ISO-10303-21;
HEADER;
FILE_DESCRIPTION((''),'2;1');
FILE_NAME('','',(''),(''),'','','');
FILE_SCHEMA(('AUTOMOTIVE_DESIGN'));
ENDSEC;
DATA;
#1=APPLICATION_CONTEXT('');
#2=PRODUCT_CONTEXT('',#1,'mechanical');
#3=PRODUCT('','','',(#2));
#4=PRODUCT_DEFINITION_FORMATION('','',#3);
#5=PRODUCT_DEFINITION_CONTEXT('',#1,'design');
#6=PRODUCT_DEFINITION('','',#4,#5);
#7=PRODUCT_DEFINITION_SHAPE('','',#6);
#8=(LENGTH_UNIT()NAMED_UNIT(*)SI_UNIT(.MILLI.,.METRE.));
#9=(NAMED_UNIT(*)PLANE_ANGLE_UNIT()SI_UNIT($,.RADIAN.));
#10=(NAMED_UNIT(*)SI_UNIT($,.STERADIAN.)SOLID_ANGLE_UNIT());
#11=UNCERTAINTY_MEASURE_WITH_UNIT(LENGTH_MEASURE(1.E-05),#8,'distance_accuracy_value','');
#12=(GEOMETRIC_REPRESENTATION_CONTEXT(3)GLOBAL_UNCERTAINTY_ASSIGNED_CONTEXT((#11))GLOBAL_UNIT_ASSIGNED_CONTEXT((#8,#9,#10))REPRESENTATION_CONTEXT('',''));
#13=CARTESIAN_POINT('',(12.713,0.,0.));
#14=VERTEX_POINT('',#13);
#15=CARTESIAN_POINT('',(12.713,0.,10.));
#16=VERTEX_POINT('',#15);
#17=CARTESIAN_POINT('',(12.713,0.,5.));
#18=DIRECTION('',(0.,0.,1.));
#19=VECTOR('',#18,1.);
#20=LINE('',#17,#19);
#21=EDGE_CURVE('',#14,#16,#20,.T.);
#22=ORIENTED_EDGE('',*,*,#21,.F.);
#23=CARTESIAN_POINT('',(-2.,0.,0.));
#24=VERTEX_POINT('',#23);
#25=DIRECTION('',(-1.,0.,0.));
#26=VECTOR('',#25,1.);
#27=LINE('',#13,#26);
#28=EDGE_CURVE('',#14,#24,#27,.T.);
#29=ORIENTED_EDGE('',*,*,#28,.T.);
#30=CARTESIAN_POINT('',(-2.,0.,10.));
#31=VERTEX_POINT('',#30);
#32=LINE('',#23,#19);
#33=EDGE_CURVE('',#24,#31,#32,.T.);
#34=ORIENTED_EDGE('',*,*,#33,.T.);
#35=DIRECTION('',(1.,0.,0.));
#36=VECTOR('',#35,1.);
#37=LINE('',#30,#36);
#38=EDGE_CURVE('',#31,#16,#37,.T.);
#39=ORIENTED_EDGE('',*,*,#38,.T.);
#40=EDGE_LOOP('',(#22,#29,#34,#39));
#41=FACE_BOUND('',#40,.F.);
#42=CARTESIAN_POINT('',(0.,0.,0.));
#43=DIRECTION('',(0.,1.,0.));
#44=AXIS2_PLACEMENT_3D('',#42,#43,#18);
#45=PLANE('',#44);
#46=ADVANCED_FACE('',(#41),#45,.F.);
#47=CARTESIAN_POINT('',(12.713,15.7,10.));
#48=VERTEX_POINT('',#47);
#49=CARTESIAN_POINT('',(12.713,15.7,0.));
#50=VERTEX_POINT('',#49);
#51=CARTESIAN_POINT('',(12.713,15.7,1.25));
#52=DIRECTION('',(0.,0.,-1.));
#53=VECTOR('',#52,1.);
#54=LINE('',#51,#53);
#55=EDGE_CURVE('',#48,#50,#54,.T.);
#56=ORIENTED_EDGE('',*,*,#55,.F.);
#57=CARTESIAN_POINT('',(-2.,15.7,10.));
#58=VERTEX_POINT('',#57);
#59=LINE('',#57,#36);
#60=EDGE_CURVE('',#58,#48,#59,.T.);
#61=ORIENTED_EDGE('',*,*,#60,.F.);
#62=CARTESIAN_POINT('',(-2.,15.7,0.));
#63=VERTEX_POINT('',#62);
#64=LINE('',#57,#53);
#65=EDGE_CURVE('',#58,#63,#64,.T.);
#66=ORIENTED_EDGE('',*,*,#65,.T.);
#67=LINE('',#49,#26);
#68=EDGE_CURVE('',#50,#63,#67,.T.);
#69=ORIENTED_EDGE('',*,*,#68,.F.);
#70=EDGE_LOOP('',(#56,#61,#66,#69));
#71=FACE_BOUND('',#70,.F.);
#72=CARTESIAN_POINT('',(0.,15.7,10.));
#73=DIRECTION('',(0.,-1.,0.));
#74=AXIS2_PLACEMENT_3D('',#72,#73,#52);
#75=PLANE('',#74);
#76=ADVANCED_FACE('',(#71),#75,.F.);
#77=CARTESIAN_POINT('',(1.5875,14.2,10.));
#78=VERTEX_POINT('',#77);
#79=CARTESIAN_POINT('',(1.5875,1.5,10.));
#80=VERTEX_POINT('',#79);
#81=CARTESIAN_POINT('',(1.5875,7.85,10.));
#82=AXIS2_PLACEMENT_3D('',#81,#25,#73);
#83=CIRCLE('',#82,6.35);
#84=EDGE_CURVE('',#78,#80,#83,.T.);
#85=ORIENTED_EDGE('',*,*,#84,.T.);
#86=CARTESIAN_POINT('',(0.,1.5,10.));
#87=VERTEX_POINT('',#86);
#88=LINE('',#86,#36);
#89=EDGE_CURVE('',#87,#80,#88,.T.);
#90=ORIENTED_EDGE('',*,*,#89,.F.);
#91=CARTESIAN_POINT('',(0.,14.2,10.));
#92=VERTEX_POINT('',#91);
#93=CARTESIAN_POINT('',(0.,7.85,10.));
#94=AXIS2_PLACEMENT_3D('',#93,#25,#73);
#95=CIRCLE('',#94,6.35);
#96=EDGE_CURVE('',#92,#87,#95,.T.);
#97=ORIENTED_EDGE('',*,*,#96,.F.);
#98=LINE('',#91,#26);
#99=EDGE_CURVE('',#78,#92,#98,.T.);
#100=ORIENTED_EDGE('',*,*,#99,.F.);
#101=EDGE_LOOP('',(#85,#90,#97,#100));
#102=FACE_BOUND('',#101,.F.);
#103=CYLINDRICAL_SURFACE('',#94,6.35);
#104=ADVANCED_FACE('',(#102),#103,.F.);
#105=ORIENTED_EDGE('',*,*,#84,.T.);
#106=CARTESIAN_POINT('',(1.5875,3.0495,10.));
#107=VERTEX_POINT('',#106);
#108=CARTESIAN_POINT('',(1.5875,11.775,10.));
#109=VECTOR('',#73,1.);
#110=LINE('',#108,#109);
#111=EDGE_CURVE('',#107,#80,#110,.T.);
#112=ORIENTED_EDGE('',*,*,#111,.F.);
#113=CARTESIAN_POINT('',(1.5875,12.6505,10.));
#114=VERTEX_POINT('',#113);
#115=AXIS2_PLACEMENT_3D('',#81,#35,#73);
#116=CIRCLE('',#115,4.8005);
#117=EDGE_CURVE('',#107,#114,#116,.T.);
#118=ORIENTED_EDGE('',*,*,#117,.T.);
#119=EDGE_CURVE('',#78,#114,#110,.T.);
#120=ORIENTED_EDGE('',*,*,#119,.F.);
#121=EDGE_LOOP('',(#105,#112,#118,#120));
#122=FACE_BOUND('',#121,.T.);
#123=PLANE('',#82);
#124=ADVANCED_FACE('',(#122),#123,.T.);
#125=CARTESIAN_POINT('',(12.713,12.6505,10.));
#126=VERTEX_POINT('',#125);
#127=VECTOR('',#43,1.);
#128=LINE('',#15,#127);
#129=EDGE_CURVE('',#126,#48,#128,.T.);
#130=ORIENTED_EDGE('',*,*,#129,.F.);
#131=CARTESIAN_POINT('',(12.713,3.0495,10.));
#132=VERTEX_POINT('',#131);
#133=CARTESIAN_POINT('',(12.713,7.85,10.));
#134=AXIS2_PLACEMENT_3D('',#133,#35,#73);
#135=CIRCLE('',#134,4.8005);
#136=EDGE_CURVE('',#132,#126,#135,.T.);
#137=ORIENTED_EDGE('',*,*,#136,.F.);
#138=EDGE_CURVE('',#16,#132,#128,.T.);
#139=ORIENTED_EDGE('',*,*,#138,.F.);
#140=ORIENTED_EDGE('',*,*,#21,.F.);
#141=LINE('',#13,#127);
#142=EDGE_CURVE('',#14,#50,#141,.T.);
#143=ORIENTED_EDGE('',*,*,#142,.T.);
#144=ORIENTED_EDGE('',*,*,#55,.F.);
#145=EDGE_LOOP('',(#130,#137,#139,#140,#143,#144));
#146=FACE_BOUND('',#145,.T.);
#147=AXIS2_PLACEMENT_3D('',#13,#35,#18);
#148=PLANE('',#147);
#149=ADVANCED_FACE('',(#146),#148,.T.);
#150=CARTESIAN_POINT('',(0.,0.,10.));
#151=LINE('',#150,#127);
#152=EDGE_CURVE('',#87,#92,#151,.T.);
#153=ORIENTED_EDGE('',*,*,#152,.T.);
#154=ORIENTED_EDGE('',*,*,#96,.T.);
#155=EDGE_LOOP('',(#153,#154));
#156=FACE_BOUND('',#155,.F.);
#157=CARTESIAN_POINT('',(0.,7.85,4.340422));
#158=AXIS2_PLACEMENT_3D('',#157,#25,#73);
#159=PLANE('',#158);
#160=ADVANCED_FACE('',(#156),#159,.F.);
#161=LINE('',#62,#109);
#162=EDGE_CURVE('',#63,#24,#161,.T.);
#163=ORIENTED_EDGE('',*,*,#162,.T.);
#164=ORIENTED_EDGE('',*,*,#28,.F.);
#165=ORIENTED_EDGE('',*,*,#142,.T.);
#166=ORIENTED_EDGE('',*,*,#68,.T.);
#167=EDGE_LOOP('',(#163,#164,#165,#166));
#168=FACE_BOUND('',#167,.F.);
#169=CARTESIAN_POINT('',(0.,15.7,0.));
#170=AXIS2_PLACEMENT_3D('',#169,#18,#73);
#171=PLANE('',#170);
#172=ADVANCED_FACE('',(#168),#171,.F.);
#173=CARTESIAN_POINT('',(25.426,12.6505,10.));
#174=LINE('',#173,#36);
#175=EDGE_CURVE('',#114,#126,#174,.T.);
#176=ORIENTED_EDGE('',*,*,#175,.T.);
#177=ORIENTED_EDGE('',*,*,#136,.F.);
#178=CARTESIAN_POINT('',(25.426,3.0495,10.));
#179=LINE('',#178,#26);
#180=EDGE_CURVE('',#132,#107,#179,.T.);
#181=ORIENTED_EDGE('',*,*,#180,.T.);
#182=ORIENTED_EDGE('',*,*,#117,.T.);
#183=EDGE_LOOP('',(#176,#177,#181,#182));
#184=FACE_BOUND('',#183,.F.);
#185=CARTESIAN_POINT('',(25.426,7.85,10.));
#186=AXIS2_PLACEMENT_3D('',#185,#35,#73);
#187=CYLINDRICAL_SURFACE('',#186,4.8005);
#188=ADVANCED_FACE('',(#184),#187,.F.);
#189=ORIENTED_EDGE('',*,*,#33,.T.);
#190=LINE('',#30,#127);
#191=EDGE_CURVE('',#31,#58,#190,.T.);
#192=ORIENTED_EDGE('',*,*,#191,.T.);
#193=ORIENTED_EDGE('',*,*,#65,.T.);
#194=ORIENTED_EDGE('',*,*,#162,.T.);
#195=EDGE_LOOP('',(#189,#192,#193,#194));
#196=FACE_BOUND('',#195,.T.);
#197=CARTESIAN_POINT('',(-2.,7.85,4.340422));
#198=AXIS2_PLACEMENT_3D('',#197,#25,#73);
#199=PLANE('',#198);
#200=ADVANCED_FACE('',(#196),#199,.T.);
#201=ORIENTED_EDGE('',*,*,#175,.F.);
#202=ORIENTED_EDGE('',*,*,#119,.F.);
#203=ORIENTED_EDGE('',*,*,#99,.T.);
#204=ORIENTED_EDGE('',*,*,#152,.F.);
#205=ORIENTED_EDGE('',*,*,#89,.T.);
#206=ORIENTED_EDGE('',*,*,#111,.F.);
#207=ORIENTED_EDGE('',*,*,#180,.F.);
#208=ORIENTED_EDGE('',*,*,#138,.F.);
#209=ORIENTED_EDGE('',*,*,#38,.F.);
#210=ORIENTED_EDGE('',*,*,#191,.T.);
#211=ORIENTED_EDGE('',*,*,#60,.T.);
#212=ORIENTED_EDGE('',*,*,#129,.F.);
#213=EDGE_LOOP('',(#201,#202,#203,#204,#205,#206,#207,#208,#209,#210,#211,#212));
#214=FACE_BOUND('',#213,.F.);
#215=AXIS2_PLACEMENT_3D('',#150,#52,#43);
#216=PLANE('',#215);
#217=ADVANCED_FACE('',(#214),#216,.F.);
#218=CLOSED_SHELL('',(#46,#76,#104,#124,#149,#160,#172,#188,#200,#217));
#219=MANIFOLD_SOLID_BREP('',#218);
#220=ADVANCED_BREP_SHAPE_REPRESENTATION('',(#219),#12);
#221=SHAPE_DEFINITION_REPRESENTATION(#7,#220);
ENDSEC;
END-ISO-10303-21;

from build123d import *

# Parameters (mm, degrees)
F1_DEPTH  = 145
F2_W      = 15.7
F2_H      = 15
F3_DEPTH  = 11.463
F4_W      = 15.7
F4_H      = 15
F5_DEPTH  = 11.463
F7_DEPTH  = 25.427
F8_R      = 6.35
F8_R_2    = 4.8005
F9_DEPTH  = 1.5875
F10_R     = 6.35
F11_DEPTH = 1.5875
F12_W     = 129.3
F12_H     = 2.5
F12_H_2   = 15
F13_DEPTH = 25.427
F15_DEPTH = 25.427
F16_W     = 12.713
F16_H     = 10
F17_DEPTH = 15.701
F19_DEPTH = 2


with BuildPart() as f1:
    # F0 (on Front) → F1 (new body)
    with BuildSketch(Plane.XZ):
        Polygon((0, 2.5), (0, 0), (12.713, 0), (25.426, 0), (25.426, 2.5), (13.963, 2.5), (13.963, 17.5), (25.426, 17.5), (25.426, 20), (12.713, 20), (0, 20), (0, 17.5), (11.463, 17.5), (11.463, 2.5), align=None)
    extrude(amount=-F1_DEPTH)

    # F2 (on face) → F3 (join, through all)
    with BuildSketch(Plane.YZ.offset(13.963)):
        with Locations((7.85, 10)):
            Rectangle(F2_W, F2_H)
    extrude(amount=F3_DEPTH)

    # F4 (on face) → F5 (join, through all)
    with BuildSketch(Plane(origin=(11.463, 0, 0), x_dir=(0, -1, 0), z_dir=(-1, 0, 0))):
        with Locations((-7.85, 10)):
            Rectangle(F4_W, F4_H)
    extrude(amount=F5_DEPTH)

    # F6 (on face) → F7 (cut, through all)
    with BuildSketch(Plane.YZ.offset(25.426)):
        with BuildLine():
            Line((3.0495, 10), (12.6505, 10))
            ThreePointArc((12.6505, 10), (7.85, 14.8005), (3.0495, 10))
        make_face()
        with BuildLine():
            ThreePointArc((3.0495, 10), (7.85, 5.1995), (12.6505, 10))
            Line((12.6505, 10), (3.0495, 10))
        make_face()
    extrude(amount=-F7_DEPTH, mode=Mode.SUBTRACT)

    # F8 (on face) → F9 (cut)
    with BuildSketch(Plane.YZ.offset(25.426)):
        with Locations((7.85, 10)):
            Circle(F8_R)
        with Locations((7.85, 10)):
            Circle(F8_R_2, mode=Mode.SUBTRACT)
    extrude(amount=-F9_DEPTH, mode=Mode.SUBTRACT)

    # F10 (on face) → F11 (cut)
    with BuildSketch(Plane(origin=(0, 0, 0), x_dir=(0, -1, 0), z_dir=(-1, 0, 0))):
        with Locations((-7.85, 10)):
            Circle(F10_R)
    extrude(amount=-F11_DEPTH, mode=Mode.SUBTRACT)

    # F12 (on face) → F13 (cut, through all)
    with BuildSketch(Plane.YZ.offset(25.426)):
        with Locations((80.35, 18.75)):
            Rectangle(F12_W, F12_H)
        with Locations((80.35, 10)):
            Rectangle(F12_W, F12_H_2)
        with Locations((80.35, 1.25)):
            Rectangle(F12_W, F12_H)
    extrude(amount=-F13_DEPTH, mode=Mode.SUBTRACT)

    # F14 (on face) → F15 (cut, through all)
    with BuildSketch(Plane(origin=(0, 0, 0), x_dir=(0, -1, 0), z_dir=(-1, 0, 0))):
        with BuildLine():
            ThreePointArc((-14.2, 10), (-7.85, 16.35), (-1.5, 10))
            Line((-1.5, 10), (0, 10))
            Line((0, 10), (0, 20))
            Line((0, 20), (-15.7, 20))
            Line((-15.7, 20), (-15.7, 10))
            Line((-15.7, 10), (-14.2, 10))
        make_face()
        with BuildLine():
            Line((-14.2, 10), (-1.5, 10))
            ThreePointArc((-1.5, 10), (-7.85, 16.35), (-14.2, 10))
        make_face()
    extrude(amount=-F15_DEPTH, mode=Mode.SUBTRACT)

    # F16 (on face) → F17 (cut, through all)
    with BuildSketch(Plane.XZ):
        with Locations((19.0695, 5)):
            Rectangle(F16_W, F16_H)
    extrude(amount=-F17_DEPTH, mode=Mode.SUBTRACT)

    # F18 (on face) → F19 (join)
    with BuildSketch(Plane(origin=(0, 0, 0), x_dir=(0, -1, 0), z_dir=(-1, 0, 0))):
        with BuildLine():
            Line((-14.2, 10), (-15.7, 10))
            Line((-15.7, 10), (-15.7, 0))
            Line((-15.7, 0), (0, 0))
            Line((0, 0), (0, 10))
            Line((0, 10), (-1.5, 10))
            ThreePointArc((-1.5, 10), (-7.85, 3.65), (-14.2, 10))
        make_face()
        with BuildLine():
            Line((-1.5, 10), (-14.2, 10))
            ThreePointArc((-14.2, 10), (-7.85, 3.65), (-1.5, 10))
        make_face()
    extrude(amount=F19_DEPTH)


solid = f1.part
